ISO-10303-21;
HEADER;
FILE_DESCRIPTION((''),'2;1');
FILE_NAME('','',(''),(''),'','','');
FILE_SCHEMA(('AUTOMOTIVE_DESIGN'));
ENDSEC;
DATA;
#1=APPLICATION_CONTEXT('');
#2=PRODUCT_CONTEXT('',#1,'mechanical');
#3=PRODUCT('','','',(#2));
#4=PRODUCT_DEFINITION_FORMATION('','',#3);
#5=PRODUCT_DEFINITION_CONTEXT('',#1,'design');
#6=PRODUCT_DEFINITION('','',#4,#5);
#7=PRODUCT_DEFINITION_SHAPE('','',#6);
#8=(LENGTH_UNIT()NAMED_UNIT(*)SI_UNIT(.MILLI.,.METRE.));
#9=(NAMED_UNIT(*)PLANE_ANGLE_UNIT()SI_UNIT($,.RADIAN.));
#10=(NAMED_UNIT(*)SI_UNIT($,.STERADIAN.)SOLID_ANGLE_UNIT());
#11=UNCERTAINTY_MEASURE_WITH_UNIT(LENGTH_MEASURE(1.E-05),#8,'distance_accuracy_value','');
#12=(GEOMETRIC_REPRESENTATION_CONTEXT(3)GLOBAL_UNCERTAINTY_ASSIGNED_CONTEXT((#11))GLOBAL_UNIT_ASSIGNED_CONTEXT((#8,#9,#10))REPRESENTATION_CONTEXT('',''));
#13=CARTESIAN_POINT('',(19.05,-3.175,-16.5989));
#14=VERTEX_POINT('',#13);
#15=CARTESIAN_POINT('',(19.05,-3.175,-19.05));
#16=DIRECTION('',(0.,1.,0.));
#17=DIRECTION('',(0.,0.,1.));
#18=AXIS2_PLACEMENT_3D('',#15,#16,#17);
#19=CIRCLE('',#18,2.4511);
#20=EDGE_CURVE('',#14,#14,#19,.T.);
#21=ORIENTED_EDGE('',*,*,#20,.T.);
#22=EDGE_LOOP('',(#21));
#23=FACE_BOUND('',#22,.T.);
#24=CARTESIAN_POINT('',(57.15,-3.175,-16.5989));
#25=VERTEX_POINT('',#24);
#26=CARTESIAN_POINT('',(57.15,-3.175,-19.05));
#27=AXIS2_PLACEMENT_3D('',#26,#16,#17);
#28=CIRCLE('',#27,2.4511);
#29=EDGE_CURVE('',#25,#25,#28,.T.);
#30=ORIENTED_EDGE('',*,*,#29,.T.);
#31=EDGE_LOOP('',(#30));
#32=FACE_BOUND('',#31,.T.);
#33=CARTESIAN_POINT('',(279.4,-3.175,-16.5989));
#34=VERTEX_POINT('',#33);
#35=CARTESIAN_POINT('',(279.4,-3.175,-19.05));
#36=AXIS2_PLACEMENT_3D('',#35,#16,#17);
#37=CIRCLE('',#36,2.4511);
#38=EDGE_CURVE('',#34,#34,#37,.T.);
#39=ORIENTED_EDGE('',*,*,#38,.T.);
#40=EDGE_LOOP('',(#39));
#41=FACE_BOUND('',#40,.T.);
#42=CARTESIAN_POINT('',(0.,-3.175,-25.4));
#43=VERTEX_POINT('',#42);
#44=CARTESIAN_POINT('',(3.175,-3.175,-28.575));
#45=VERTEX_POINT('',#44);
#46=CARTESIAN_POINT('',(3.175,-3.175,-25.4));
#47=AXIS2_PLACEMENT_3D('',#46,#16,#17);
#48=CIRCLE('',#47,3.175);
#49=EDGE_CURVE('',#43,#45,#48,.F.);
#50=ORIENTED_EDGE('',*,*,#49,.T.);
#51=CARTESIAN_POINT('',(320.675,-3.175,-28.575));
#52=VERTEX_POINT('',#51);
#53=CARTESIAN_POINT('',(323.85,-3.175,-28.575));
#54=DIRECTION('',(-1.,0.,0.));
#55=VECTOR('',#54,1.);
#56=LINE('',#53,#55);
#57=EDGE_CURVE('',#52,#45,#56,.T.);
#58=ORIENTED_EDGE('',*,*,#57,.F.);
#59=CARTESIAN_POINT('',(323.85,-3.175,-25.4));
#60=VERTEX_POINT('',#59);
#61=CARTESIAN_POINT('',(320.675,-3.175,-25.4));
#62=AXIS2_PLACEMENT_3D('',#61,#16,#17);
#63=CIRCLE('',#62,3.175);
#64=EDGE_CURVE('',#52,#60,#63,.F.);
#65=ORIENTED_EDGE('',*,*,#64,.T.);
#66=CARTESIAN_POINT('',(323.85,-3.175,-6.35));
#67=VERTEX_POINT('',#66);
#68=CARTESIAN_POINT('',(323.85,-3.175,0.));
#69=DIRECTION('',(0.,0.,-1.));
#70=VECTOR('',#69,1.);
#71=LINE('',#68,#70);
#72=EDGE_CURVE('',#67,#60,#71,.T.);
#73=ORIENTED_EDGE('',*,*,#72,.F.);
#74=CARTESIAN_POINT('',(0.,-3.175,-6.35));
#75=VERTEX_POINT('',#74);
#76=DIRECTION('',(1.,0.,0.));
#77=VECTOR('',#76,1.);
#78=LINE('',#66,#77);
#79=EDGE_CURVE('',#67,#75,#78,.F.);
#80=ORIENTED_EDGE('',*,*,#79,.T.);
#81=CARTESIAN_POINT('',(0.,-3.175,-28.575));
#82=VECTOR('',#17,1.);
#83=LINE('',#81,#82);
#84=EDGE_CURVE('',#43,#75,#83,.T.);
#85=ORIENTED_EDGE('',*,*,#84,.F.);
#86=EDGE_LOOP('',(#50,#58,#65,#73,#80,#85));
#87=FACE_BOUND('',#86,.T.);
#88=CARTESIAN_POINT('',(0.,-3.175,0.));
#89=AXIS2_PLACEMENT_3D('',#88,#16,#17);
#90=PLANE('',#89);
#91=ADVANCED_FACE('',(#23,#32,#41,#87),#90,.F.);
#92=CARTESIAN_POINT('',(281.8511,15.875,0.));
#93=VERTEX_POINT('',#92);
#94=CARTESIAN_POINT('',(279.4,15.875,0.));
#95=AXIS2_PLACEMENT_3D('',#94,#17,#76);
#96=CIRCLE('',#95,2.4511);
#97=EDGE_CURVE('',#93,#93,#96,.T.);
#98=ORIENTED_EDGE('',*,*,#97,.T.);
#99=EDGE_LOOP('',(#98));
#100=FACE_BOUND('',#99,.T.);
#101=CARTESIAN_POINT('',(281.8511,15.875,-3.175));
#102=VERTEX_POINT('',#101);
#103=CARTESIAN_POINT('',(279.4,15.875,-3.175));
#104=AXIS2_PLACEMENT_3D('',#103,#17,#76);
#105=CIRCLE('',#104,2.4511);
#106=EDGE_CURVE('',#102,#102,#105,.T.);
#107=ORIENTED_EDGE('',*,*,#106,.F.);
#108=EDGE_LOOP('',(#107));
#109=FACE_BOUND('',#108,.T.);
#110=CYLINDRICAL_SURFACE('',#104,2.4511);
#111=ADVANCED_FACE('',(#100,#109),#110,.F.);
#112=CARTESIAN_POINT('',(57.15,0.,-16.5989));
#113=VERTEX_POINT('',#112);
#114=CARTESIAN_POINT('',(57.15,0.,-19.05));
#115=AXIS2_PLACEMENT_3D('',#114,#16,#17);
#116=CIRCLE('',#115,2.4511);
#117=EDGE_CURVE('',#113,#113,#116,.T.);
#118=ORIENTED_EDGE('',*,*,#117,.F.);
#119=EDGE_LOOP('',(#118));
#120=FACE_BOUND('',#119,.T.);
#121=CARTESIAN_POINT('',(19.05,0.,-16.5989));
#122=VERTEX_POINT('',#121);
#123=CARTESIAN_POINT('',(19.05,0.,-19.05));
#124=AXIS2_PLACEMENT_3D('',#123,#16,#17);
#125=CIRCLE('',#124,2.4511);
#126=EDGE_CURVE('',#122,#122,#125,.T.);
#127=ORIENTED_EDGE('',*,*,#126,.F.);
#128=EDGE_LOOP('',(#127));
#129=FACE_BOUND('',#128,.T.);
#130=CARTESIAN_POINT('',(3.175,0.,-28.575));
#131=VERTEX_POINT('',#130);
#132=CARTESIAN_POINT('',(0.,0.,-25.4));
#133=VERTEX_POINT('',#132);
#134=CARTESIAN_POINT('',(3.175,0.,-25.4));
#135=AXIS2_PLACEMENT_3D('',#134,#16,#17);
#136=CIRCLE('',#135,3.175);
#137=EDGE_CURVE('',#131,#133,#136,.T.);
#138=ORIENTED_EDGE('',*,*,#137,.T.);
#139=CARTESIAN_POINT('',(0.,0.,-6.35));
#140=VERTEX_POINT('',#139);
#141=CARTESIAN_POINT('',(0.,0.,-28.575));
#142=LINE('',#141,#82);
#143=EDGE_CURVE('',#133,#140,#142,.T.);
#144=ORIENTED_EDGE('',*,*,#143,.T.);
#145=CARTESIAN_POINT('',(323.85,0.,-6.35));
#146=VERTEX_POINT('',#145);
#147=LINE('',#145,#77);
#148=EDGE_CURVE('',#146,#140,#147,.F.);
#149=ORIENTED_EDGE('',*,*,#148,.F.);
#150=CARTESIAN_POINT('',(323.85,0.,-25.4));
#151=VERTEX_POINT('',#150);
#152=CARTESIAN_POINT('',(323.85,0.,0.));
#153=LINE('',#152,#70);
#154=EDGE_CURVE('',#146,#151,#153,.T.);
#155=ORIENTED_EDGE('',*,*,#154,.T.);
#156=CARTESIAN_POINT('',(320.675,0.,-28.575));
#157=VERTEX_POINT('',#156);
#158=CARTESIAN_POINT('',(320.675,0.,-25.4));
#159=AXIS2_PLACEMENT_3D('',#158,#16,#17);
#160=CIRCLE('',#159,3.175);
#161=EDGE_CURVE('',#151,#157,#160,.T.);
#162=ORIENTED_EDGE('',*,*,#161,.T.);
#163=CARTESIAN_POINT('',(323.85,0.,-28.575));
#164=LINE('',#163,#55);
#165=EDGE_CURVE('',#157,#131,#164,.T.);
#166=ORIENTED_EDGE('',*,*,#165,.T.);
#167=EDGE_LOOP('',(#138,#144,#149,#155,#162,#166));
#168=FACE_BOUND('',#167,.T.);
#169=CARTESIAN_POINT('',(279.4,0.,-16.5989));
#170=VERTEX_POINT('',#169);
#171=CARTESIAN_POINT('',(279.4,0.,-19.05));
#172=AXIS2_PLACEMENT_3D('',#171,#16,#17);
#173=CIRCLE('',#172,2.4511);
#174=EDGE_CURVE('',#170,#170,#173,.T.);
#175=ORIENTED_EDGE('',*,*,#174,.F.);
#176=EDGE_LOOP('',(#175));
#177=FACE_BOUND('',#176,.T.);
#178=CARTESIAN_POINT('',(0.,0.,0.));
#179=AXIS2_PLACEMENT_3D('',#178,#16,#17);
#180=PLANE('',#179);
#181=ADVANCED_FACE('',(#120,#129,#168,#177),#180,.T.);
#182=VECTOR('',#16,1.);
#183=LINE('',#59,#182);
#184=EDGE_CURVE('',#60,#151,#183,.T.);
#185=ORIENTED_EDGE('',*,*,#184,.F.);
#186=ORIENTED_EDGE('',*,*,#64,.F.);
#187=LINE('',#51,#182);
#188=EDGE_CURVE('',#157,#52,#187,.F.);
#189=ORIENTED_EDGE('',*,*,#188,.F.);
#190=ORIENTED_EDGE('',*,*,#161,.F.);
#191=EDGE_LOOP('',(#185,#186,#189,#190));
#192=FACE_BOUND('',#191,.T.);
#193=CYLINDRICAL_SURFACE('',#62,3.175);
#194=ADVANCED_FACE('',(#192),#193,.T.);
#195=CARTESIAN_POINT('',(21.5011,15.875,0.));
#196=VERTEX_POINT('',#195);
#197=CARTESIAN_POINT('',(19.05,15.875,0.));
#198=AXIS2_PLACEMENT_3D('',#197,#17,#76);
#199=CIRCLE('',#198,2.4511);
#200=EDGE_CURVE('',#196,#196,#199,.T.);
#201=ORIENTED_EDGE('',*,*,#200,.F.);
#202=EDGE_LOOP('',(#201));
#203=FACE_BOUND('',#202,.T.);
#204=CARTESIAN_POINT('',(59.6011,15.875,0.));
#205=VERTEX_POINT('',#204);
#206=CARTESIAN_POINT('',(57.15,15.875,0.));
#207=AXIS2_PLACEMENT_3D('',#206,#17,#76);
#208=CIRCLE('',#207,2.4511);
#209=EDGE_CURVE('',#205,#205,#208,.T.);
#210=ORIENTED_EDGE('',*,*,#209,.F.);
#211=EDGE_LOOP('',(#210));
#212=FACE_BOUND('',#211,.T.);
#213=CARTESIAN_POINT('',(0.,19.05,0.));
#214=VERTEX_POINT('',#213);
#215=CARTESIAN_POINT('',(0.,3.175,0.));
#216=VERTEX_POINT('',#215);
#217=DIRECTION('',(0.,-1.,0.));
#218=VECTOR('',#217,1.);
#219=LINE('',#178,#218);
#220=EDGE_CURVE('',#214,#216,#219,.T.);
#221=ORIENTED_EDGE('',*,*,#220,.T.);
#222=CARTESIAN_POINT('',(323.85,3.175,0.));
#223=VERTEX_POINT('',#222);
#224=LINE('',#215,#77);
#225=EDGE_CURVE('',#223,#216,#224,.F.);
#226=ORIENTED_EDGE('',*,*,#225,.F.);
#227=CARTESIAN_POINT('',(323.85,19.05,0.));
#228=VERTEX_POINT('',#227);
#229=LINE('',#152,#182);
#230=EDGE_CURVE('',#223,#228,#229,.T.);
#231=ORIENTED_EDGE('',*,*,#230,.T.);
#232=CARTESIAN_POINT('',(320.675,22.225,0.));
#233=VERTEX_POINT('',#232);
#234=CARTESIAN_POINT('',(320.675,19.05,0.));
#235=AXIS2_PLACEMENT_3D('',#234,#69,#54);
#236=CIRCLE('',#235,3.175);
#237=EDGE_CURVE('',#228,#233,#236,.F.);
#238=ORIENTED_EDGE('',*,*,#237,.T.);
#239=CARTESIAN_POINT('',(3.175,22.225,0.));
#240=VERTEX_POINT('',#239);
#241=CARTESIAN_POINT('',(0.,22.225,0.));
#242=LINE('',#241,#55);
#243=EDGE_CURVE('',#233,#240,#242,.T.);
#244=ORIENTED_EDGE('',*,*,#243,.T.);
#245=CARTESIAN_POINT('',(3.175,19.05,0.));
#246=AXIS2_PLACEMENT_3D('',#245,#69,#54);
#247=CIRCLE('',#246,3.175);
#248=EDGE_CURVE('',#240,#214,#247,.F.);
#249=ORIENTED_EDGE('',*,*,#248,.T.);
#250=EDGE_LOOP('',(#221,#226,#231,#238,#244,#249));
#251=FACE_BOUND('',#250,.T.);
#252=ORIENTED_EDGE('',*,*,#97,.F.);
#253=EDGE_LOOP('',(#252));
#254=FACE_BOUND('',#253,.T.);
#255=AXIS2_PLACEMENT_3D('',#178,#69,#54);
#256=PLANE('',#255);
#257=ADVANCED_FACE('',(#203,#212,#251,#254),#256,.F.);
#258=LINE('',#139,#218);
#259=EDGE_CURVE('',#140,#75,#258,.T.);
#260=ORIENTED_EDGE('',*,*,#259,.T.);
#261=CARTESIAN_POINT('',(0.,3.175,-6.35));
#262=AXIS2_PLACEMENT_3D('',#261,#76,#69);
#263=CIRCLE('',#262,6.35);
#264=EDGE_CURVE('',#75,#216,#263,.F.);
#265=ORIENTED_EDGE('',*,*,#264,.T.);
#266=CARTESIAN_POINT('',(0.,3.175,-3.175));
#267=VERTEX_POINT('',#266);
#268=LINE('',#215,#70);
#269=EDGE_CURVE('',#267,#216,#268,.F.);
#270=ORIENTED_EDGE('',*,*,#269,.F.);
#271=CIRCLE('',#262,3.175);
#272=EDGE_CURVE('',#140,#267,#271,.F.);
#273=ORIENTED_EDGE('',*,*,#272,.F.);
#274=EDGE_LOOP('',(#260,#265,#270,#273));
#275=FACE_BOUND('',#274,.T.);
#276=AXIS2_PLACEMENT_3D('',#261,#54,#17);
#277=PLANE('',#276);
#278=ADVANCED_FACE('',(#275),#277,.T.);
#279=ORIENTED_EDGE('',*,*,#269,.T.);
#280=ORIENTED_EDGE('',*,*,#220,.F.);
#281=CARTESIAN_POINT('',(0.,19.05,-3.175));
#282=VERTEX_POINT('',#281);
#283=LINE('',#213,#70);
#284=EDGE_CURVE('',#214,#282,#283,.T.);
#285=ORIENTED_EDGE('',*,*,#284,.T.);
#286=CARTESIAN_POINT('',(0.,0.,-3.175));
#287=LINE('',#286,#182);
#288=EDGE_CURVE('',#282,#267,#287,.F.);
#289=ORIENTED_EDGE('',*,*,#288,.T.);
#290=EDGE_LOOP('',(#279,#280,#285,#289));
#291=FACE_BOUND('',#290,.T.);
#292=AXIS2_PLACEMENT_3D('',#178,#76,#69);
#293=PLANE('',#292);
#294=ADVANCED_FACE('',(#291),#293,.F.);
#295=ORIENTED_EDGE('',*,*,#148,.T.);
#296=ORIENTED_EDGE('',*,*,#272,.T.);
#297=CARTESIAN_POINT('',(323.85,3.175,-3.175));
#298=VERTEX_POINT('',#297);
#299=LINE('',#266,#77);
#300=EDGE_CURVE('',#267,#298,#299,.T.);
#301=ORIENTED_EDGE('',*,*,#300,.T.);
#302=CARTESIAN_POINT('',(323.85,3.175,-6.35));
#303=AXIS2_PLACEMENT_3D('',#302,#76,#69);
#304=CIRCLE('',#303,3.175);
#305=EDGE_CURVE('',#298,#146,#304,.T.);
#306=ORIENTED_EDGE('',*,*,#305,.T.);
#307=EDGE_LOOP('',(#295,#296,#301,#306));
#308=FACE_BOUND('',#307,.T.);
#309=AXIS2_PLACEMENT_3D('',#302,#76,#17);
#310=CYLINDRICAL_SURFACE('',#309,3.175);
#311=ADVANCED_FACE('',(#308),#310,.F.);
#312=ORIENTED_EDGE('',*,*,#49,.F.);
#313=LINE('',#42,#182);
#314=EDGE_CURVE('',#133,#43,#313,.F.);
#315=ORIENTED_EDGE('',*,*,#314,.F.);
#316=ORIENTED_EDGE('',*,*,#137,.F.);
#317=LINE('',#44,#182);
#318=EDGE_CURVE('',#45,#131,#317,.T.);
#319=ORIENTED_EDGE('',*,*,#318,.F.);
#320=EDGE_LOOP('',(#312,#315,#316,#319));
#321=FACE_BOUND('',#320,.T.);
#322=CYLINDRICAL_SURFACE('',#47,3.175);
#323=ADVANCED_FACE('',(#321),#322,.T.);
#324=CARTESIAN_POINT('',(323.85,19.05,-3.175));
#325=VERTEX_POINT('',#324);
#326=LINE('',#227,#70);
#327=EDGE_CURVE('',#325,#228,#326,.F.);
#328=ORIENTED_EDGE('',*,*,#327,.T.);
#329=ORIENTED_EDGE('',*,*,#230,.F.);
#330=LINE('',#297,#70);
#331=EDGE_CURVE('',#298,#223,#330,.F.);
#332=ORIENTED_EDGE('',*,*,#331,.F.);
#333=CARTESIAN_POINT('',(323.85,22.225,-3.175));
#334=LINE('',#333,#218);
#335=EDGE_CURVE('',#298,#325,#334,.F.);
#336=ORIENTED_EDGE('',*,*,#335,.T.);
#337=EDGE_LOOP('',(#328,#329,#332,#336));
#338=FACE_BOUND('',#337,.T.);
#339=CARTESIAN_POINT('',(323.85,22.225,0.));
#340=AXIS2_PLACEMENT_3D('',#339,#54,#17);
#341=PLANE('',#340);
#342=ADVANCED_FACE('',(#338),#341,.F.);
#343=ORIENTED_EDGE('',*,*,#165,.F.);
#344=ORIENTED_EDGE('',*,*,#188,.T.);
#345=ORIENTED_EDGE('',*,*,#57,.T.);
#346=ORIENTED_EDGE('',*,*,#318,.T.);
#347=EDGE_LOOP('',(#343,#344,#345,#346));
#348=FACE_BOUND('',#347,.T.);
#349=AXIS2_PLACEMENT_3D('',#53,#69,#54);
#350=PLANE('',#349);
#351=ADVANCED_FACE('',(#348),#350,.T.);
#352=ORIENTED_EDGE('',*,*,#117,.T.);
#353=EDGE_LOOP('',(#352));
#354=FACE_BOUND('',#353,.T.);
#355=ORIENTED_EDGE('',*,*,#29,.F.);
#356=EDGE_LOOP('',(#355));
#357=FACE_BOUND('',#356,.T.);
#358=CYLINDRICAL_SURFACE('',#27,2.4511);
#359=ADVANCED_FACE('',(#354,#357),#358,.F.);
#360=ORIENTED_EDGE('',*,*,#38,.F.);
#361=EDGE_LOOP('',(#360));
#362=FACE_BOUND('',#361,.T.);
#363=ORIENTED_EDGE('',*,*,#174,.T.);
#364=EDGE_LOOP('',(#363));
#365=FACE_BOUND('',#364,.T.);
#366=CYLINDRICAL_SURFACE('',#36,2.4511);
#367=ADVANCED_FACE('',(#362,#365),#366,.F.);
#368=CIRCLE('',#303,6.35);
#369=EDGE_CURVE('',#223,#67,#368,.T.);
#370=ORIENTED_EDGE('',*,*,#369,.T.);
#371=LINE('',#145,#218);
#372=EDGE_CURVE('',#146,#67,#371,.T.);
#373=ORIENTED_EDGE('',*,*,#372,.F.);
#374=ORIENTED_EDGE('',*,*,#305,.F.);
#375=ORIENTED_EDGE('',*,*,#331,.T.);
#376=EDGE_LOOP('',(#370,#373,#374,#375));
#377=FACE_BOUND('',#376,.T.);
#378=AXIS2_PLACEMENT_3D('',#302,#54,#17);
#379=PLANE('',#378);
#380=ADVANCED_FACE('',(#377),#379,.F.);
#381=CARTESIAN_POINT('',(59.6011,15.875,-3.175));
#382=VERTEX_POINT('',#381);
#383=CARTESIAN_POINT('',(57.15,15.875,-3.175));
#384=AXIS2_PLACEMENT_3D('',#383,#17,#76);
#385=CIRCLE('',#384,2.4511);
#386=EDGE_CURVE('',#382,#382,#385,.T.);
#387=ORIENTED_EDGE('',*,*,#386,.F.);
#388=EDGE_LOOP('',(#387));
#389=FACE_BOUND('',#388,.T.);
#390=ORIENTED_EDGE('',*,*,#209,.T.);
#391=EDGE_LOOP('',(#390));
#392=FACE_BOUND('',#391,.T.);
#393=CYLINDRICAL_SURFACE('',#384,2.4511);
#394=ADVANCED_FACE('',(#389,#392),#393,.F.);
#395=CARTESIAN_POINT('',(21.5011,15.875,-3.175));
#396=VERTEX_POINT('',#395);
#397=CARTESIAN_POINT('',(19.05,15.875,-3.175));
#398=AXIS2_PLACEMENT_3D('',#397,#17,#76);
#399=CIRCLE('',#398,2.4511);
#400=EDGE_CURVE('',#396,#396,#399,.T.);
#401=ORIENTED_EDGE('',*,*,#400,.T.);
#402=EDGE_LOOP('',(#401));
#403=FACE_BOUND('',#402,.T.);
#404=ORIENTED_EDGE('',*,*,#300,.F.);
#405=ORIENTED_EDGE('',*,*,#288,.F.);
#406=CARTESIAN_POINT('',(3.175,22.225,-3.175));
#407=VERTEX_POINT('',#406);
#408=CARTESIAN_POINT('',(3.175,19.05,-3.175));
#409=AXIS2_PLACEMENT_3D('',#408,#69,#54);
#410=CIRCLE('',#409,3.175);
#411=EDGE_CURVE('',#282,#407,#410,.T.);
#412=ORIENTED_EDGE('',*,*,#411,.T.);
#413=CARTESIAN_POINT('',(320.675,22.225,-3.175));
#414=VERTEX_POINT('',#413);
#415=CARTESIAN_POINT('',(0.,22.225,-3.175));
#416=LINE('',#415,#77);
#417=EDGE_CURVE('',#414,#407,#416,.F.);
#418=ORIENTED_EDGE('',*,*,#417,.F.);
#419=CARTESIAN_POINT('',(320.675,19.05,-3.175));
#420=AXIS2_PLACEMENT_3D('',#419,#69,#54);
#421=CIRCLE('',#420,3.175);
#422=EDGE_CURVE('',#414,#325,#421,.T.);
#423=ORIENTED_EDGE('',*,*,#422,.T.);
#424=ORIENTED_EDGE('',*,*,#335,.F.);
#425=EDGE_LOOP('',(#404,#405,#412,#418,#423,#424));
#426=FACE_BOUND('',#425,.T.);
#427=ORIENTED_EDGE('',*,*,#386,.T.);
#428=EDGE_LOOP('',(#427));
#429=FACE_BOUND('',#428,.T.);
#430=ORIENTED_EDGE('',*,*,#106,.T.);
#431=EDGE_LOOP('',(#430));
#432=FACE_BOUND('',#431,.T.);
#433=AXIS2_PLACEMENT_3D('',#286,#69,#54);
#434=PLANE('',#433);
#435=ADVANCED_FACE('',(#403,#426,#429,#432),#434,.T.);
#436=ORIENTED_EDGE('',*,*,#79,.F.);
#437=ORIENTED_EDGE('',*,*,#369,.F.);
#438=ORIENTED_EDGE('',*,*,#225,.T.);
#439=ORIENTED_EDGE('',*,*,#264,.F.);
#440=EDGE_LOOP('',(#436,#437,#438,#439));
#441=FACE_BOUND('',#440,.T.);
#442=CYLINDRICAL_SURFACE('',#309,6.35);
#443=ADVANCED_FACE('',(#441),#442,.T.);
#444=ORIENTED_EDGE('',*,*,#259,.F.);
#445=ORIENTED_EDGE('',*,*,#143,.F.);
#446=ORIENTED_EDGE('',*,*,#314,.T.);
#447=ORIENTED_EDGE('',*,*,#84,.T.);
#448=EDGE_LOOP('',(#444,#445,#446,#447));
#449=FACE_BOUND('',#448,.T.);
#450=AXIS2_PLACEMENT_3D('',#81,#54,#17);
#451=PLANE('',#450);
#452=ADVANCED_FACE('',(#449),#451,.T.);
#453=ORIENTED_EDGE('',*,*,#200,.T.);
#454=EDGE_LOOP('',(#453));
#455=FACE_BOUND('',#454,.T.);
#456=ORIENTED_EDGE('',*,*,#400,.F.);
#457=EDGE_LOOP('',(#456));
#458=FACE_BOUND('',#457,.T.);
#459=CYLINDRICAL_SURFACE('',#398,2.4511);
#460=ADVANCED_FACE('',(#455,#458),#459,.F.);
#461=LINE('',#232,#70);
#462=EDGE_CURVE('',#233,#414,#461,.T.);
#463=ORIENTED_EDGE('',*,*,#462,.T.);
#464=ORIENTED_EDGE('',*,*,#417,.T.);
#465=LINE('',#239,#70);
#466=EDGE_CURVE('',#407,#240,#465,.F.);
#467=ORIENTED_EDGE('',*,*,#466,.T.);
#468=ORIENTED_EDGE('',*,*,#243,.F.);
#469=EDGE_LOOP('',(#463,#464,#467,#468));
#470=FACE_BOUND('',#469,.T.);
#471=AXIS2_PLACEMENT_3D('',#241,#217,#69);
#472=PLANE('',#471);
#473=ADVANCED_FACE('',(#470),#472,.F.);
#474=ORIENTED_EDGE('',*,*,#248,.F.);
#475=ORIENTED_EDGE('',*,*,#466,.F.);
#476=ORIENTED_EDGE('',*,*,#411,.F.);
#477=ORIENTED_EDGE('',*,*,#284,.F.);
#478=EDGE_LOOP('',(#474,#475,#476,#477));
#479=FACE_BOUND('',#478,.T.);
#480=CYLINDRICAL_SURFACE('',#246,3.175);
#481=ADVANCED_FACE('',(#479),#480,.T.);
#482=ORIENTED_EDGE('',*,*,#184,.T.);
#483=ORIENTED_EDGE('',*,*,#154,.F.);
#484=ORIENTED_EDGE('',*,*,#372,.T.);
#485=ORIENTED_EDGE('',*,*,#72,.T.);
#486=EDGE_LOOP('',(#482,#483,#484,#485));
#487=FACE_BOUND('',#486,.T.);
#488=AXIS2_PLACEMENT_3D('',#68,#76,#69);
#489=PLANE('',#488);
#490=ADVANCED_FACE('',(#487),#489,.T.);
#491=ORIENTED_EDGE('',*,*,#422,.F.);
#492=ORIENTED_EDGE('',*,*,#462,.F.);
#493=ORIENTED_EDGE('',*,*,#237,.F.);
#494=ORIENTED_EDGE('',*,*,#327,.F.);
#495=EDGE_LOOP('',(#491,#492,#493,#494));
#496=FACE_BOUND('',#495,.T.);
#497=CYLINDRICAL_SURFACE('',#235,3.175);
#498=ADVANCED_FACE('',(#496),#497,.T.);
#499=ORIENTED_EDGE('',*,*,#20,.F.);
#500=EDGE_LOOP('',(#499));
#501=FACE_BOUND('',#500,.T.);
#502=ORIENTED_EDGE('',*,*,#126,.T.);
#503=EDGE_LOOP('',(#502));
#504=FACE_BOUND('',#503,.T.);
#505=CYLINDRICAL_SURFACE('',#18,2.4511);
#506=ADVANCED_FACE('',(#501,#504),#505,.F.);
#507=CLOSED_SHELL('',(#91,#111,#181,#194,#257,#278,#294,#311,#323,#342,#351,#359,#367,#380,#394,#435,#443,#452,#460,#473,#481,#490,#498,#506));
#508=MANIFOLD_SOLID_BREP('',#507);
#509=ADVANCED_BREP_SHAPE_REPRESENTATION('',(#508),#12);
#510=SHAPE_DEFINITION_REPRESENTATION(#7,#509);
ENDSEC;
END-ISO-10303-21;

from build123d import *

# Parameters (mm, degrees)
SKETCH9_W                    = 323.85
SKETCH9_H                    = 28.575
BASE_FLANGE2_DEPTH           = 3.175
EDGE_FLANGE1_STRIP_W         = 19.05
EDGE_FLANGE1_STRIP_H         = 3.175
EDGE_FLANGE1_STRIP_CUT_DEPTH = 323.85
EDGE_FLANGE1_DEPTH           = 323.85
SKETCH15_R                   = 2.4511
CUT_EXTRUDE1_DEPTH           = 3.175
FILLET1_R                    = 3.175
SKETCH16_R                   = 2.4511
CUT_EXTRUDE2_DEPTH           = 3.175


# Sheet-metal steps are written as plain solids
with BuildPart() as part:
    # Sketch9 → Base-Flange2 (new body)
    with BuildSketch(Plane(origin=(0, 0, 0), x_dir=(1, 0, 0), z_dir=(0, 1, 0))):
        with Locations((161.925, 14.2875)):
            Rectangle(SKETCH9_W, SKETCH9_H)
    extrude(amount=-BASE_FLANGE2_DEPTH)

    # Edge-Flange1 strip (across the edge) → Edge-Flange1 strip cut (cut)
    with BuildSketch(Plane(origin=(0, 0, 0), x_dir=(0, 0, -1), z_dir=(1, 0, 0))):
        with Locations((-3.175, -1.5875)):
            Rectangle(EDGE_FLANGE1_STRIP_W, EDGE_FLANGE1_STRIP_H)
    extrude(amount=EDGE_FLANGE1_STRIP_CUT_DEPTH, mode=Mode.SUBTRACT)

    # Edge-Flange1 section (across the edge) → Edge-Flange1 (add)
    with BuildSketch(Plane(origin=(0, 0, 0), x_dir=(0, 0, -1), z_dir=(1, 0, 0))):
        with BuildLine():
            Line((0, 3.175), (0, 22.225))
            Line((0, 22.225), (3.175, 22.225))
            Line((3.175, 22.225), (3.175, 3.175))
            ThreePointArc((3.175, 3.175), (4.10493597, 0.92993597), (6.35, 0))
            Line((6.35, 0), (6.35, -3.175))
            ThreePointArc((6.35, -3.175), (1.859871939, -1.315128061), (0, 3.175))
        make_face()
    extrude(amount=EDGE_FLANGE1_DEPTH)

    # Sketch15 → Cut-Extrude1 (cut)
    with BuildSketch(Plane(origin=(0, 0, 0), x_dir=(1, 0, 0), z_dir=(0, 1, 0))):
        with Locations(Location((19.05, 19.05, 0), (0, 0, 270))):
            Circle(SKETCH15_R)
        with Locations(Location((57.15, 19.05, 0), (0, 0, 270))):
            Circle(SKETCH15_R)
        with Locations(Location((279.4, 19.05, 0), (0, 0, 270))):
            Circle(SKETCH15_R)
        with Locations((501.65, 19.05)):
            Circle(SKETCH15_R)
    extrude(amount=-CUT_EXTRUDE1_DEPTH, mode=Mode.SUBTRACT)

    # Fillet1
    fillet1_edges = [part.edges().sort_by_distance(p)[0] for p in [
        (0, 22.225, -1.5875),
        (323.85, 22.225, -1.5875),
        (0, -1.5875, -28.575),
        (323.85, -1.5875, -28.575),
    ]]
    fillet(fillet1_edges, radius=FILLET1_R)

    # Sketch16 → Cut-Extrude2 (cut)
    with BuildSketch(Plane.XY):
        with Locations((19.05, 15.875)):
            Circle(SKETCH16_R)
        with Locations((57.15, 15.875)):
            Circle(SKETCH16_R)
        with Locations((279.4, 15.875)):
            Circle(SKETCH16_R)
    extrude(amount=-CUT_EXTRUDE2_DEPTH, mode=Mode.SUBTRACT)


solid = part.part
